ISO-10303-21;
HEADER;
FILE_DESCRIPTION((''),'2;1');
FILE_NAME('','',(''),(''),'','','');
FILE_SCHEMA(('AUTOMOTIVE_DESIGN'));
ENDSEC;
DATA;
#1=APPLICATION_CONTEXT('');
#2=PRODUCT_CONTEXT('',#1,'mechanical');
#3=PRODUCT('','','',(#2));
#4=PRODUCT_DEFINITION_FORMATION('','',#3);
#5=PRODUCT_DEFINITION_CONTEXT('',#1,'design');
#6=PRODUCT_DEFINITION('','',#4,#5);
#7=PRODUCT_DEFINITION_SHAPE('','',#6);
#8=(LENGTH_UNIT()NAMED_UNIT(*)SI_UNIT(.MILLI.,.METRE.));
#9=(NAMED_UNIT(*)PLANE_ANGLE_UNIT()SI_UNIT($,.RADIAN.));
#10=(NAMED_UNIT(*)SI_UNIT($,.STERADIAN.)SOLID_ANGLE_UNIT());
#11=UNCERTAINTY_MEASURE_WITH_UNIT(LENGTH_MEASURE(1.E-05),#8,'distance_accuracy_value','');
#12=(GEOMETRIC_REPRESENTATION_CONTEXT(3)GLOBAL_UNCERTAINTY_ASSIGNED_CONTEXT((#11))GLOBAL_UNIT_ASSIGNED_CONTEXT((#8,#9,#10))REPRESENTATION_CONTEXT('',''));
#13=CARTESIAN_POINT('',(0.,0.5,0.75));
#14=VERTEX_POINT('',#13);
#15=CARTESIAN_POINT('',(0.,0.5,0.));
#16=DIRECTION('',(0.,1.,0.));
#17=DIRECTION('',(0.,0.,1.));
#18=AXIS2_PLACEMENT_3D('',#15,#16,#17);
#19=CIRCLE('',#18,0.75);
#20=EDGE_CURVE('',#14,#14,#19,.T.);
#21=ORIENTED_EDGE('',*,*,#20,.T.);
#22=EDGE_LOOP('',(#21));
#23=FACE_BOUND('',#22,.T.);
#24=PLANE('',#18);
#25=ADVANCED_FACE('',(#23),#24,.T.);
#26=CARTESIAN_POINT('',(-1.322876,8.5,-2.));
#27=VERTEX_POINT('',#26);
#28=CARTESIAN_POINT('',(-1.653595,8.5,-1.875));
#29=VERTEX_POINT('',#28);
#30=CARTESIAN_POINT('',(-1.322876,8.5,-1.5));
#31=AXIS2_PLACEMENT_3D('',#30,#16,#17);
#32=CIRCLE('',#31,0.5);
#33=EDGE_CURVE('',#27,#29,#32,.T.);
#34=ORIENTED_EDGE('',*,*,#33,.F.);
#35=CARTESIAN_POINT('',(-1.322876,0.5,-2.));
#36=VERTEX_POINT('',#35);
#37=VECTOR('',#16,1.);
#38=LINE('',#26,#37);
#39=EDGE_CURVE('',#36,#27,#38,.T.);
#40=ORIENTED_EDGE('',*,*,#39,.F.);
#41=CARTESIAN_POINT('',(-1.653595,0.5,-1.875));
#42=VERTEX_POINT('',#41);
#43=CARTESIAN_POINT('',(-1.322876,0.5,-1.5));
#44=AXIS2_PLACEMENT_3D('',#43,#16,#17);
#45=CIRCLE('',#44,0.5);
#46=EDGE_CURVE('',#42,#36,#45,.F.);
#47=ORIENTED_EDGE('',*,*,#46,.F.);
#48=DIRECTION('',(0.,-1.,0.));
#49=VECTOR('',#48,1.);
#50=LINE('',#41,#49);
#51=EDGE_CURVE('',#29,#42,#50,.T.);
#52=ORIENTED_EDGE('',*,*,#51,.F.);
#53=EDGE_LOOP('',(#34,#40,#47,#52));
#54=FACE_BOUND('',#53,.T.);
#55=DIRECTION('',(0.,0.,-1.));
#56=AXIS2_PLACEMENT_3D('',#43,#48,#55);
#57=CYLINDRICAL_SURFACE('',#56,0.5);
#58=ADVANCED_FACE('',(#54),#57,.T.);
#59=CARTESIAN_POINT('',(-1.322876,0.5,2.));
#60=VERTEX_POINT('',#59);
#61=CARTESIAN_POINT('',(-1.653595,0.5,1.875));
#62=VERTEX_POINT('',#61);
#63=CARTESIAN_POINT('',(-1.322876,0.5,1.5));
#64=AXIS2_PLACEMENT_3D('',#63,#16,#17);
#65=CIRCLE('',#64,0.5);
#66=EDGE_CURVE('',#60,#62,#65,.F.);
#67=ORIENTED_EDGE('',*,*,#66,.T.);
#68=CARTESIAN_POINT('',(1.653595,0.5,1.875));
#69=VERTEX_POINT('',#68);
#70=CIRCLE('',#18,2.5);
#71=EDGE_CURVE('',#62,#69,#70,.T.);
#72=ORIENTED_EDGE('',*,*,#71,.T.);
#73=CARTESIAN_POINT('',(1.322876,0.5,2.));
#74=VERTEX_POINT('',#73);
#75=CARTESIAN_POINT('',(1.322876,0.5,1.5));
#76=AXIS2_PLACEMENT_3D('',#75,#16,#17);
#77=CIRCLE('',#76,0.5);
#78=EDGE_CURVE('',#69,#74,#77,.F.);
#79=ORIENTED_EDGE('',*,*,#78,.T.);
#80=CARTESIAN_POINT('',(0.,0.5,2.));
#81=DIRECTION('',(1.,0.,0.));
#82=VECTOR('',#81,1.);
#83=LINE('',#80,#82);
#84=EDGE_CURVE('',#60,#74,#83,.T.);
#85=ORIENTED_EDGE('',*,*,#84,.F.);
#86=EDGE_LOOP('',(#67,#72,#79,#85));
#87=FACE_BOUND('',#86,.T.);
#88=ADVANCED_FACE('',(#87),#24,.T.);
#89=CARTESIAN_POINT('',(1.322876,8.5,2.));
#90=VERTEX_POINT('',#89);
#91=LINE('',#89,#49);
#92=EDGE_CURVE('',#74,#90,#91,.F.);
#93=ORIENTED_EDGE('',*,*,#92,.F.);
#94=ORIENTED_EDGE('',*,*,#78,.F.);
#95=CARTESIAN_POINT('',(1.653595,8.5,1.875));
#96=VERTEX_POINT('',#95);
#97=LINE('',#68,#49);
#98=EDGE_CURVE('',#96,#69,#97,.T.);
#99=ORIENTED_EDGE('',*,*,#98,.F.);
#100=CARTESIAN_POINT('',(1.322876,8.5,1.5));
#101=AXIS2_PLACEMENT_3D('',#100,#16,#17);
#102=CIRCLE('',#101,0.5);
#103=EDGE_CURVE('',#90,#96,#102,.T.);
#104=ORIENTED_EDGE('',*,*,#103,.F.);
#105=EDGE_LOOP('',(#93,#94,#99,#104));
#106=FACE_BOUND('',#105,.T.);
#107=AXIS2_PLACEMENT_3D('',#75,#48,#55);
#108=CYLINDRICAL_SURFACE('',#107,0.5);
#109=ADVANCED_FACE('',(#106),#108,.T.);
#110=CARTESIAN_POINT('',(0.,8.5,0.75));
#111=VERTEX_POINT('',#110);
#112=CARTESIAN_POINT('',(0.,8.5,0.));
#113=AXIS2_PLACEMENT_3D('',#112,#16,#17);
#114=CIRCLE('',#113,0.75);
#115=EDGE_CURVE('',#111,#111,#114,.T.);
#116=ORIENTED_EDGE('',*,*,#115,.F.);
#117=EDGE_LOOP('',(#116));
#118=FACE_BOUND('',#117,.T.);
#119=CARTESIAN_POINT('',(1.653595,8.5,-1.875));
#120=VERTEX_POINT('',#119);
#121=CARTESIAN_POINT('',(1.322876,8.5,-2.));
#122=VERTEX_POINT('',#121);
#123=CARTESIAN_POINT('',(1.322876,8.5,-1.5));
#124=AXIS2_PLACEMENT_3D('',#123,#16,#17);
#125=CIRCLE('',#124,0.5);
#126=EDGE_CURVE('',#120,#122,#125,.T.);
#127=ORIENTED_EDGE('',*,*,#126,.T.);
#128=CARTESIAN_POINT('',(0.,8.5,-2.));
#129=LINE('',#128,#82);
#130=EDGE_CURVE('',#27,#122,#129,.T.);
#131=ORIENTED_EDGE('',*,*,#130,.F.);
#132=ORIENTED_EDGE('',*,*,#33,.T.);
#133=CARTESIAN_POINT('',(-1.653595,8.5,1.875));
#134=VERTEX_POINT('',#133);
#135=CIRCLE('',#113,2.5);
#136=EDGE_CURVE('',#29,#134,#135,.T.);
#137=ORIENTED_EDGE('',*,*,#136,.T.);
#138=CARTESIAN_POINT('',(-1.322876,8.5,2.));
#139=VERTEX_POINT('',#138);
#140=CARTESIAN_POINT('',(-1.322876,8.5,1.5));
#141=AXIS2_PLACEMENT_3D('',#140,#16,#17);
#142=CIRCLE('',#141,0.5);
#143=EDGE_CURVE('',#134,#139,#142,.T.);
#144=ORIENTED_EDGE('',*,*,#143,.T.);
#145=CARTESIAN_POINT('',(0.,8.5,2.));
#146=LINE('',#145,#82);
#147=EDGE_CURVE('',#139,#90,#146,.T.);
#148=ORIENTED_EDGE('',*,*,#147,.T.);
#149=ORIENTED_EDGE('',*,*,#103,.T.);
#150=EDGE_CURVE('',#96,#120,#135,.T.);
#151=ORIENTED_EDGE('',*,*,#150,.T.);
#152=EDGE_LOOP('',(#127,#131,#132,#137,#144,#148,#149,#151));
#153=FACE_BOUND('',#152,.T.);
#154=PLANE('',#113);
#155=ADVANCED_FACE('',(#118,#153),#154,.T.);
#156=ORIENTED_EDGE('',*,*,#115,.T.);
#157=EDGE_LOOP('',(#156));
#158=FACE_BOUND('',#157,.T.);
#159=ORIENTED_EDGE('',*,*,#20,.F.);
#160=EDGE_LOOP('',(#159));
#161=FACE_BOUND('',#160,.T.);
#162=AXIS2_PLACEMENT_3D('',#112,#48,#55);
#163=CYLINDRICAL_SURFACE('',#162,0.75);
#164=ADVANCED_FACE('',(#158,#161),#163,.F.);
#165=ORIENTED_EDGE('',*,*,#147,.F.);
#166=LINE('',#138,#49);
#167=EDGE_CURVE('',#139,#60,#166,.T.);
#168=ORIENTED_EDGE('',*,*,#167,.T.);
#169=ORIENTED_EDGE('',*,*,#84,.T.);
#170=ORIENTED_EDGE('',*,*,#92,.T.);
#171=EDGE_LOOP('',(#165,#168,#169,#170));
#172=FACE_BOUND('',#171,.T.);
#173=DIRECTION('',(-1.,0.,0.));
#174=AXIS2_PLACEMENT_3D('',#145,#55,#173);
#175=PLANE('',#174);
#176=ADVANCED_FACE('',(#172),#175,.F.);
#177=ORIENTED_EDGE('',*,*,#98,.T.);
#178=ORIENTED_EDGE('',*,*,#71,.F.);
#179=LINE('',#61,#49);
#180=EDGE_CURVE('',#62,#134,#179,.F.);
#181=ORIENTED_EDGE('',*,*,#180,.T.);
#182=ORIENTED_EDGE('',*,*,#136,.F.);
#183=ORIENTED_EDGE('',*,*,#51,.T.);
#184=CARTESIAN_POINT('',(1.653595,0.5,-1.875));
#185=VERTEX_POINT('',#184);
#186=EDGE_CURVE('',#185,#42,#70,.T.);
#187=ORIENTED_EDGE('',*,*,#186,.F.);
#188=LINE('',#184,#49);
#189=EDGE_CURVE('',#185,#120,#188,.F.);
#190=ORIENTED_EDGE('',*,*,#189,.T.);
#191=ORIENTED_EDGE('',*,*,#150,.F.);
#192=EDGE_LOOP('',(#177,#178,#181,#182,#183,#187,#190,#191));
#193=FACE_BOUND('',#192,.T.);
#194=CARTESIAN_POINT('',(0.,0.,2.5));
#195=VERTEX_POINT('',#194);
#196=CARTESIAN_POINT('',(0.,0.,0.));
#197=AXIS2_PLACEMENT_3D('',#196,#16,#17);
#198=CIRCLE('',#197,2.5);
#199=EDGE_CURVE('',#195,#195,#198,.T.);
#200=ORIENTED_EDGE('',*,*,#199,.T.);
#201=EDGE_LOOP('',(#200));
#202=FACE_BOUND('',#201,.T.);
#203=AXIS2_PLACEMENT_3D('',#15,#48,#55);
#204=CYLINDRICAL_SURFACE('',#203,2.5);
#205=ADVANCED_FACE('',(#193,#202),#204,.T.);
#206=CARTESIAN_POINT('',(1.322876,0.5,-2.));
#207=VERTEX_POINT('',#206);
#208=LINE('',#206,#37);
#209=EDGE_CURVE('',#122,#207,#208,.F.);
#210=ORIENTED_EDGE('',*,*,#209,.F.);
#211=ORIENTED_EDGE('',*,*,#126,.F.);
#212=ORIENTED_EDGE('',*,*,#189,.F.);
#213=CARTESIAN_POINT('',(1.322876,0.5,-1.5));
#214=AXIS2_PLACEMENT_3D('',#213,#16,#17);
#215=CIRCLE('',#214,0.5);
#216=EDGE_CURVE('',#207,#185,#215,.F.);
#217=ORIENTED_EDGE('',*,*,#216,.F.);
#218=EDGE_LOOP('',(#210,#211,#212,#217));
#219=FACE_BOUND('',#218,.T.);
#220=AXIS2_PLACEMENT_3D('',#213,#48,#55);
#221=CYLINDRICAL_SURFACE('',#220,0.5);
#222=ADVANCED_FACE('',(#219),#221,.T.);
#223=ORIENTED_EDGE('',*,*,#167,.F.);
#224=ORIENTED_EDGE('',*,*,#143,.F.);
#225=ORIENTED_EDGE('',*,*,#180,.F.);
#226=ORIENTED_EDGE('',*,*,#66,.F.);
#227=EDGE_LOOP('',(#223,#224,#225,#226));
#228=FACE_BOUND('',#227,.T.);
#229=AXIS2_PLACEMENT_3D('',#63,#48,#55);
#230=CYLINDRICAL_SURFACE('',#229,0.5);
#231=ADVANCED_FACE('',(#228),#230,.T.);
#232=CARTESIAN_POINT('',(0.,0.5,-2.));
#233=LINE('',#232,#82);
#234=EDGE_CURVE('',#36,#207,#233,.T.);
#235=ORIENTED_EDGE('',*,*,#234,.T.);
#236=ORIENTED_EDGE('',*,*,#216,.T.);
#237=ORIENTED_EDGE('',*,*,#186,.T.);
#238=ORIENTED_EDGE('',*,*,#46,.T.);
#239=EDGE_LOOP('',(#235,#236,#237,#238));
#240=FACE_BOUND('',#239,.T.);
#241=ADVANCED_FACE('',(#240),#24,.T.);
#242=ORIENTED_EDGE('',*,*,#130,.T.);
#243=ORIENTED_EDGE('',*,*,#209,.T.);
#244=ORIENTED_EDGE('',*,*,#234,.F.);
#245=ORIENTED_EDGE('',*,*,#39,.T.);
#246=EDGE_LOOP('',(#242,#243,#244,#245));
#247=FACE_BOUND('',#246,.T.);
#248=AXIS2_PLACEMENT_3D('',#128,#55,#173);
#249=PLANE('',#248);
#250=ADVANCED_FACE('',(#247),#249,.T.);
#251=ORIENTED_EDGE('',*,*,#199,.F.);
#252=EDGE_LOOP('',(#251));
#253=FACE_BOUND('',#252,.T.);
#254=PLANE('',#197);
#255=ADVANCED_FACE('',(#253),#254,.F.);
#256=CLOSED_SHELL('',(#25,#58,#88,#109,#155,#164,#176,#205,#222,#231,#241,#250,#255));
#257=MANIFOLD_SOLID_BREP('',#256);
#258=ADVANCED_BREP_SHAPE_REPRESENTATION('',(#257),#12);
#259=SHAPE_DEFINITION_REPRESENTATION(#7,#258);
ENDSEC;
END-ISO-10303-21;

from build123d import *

# Parameters (mm, degrees)
SKETCH2_R           = 2.5
BOSS_EXTRUDE1_DEPTH = 0.5
BOSS_EXTRUDE2_DEPTH = 8
FILLET1_R           = 0.5


with BuildPart() as part:
    # Sketch2 → Boss-Extrude1 (new body)
    with BuildSketch(Plane(origin=(0, 0, 0), x_dir=(1, 0, 0), z_dir=(0, 1, 0))):
        with Locations(Location((0, 0, 0), (0, 0, 270))):
            Circle(SKETCH2_R)
    extrude(amount=BOSS_EXTRUDE1_DEPTH)

    # Sketch3 → Boss-Extrude2 (add)
    with BuildSketch(Plane(origin=(0, 0.5, 0), x_dir=(1, 0, 0), z_dir=(0, 1, 0))):
        with BuildLine():
            Line((1.5, 2), (-1.5, 2))
            ThreePointArc((-1.5, 2), (-2.236067977, 1.118033989), (-2.5, 0))
            Line((-2.5, 0), (-0.75, 0))
            ThreePointArc((-0.75, 0), (0, 0.75), (0.75, 0))
            Line((0.75, 0), (2.5, 0))
            ThreePointArc((2.5, 0), (2.236067977, 1.118033989), (1.5, 2))
        make_face()
        with BuildLine():
            Line((-0.75, 0), (-2.5, 0))
            ThreePointArc((-2.5, 0), (-2.236067977, -1.118033989), (-1.5, -2))
            Line((-1.5, -2), (1.5, -2))
            ThreePointArc((1.5, -2), (2.236067977, -1.118033989), (2.5, 0))
            Line((2.5, 0), (0.75, 0))
            ThreePointArc((0.75, 0), (0, -0.75), (-0.75, 0))
        make_face()
    extrude(amount=BOSS_EXTRUDE2_DEPTH)

    # Fillet1
    # the kernel refuses this fillet: 0.5 mm, written as the material it takes off along each edge
    with BuildSketch(Plane(origin=(-1.5, 0.5, -2), x_dir=(-0.7756085685899518, 0, 0.6312141857799506), z_dir=(0, 1, 0)), Plane(origin=(1.5, 0.5, 2), x_dir=(0.7756085685899534, 0, -0.6312141857799487), z_dir=(0, 1, 0))) as fillet1_piece_1:
        with BuildLine():
            CenterArc((0.178227934, 0.499607683), FILLET1_R, 230.860240122, 41.409622109)
            Line((-0.137379159, 0.111803399), (0, 0))
            ThreePointArc((0, 0), (0.099015519, -0.001961584), (0.198031037, 0))
        make_face()
    extrude(amount=8.495077593, mode=Mode.SUBTRACT)
    with BuildSketch(Plane(origin=(1.5, 0.5, -2), x_dir=(0.7756085685899526, 0, 0.6312141857799497), z_dir=(0, 1, 0)), Plane(origin=(-1.5, 0.5, 2), x_dir=(-0.7756085685899534, 0, -0.6312141857799487), z_dir=(0, 1, 0))) as fillet1_piece_2:
        with BuildLine():
            CenterArc((0.178227934, -0.499607683), FILLET1_R, 87.730137768, 41.409622109)
            Line((-0.137379159, -0.111803399), (0, 0))
            ThreePointArc((0, 0), (0.099015519, 0.001961584), (0.198031037, 0))
        make_face()
    extrude(amount=8.495077593, mode=Mode.SUBTRACT)


solid = part.part
